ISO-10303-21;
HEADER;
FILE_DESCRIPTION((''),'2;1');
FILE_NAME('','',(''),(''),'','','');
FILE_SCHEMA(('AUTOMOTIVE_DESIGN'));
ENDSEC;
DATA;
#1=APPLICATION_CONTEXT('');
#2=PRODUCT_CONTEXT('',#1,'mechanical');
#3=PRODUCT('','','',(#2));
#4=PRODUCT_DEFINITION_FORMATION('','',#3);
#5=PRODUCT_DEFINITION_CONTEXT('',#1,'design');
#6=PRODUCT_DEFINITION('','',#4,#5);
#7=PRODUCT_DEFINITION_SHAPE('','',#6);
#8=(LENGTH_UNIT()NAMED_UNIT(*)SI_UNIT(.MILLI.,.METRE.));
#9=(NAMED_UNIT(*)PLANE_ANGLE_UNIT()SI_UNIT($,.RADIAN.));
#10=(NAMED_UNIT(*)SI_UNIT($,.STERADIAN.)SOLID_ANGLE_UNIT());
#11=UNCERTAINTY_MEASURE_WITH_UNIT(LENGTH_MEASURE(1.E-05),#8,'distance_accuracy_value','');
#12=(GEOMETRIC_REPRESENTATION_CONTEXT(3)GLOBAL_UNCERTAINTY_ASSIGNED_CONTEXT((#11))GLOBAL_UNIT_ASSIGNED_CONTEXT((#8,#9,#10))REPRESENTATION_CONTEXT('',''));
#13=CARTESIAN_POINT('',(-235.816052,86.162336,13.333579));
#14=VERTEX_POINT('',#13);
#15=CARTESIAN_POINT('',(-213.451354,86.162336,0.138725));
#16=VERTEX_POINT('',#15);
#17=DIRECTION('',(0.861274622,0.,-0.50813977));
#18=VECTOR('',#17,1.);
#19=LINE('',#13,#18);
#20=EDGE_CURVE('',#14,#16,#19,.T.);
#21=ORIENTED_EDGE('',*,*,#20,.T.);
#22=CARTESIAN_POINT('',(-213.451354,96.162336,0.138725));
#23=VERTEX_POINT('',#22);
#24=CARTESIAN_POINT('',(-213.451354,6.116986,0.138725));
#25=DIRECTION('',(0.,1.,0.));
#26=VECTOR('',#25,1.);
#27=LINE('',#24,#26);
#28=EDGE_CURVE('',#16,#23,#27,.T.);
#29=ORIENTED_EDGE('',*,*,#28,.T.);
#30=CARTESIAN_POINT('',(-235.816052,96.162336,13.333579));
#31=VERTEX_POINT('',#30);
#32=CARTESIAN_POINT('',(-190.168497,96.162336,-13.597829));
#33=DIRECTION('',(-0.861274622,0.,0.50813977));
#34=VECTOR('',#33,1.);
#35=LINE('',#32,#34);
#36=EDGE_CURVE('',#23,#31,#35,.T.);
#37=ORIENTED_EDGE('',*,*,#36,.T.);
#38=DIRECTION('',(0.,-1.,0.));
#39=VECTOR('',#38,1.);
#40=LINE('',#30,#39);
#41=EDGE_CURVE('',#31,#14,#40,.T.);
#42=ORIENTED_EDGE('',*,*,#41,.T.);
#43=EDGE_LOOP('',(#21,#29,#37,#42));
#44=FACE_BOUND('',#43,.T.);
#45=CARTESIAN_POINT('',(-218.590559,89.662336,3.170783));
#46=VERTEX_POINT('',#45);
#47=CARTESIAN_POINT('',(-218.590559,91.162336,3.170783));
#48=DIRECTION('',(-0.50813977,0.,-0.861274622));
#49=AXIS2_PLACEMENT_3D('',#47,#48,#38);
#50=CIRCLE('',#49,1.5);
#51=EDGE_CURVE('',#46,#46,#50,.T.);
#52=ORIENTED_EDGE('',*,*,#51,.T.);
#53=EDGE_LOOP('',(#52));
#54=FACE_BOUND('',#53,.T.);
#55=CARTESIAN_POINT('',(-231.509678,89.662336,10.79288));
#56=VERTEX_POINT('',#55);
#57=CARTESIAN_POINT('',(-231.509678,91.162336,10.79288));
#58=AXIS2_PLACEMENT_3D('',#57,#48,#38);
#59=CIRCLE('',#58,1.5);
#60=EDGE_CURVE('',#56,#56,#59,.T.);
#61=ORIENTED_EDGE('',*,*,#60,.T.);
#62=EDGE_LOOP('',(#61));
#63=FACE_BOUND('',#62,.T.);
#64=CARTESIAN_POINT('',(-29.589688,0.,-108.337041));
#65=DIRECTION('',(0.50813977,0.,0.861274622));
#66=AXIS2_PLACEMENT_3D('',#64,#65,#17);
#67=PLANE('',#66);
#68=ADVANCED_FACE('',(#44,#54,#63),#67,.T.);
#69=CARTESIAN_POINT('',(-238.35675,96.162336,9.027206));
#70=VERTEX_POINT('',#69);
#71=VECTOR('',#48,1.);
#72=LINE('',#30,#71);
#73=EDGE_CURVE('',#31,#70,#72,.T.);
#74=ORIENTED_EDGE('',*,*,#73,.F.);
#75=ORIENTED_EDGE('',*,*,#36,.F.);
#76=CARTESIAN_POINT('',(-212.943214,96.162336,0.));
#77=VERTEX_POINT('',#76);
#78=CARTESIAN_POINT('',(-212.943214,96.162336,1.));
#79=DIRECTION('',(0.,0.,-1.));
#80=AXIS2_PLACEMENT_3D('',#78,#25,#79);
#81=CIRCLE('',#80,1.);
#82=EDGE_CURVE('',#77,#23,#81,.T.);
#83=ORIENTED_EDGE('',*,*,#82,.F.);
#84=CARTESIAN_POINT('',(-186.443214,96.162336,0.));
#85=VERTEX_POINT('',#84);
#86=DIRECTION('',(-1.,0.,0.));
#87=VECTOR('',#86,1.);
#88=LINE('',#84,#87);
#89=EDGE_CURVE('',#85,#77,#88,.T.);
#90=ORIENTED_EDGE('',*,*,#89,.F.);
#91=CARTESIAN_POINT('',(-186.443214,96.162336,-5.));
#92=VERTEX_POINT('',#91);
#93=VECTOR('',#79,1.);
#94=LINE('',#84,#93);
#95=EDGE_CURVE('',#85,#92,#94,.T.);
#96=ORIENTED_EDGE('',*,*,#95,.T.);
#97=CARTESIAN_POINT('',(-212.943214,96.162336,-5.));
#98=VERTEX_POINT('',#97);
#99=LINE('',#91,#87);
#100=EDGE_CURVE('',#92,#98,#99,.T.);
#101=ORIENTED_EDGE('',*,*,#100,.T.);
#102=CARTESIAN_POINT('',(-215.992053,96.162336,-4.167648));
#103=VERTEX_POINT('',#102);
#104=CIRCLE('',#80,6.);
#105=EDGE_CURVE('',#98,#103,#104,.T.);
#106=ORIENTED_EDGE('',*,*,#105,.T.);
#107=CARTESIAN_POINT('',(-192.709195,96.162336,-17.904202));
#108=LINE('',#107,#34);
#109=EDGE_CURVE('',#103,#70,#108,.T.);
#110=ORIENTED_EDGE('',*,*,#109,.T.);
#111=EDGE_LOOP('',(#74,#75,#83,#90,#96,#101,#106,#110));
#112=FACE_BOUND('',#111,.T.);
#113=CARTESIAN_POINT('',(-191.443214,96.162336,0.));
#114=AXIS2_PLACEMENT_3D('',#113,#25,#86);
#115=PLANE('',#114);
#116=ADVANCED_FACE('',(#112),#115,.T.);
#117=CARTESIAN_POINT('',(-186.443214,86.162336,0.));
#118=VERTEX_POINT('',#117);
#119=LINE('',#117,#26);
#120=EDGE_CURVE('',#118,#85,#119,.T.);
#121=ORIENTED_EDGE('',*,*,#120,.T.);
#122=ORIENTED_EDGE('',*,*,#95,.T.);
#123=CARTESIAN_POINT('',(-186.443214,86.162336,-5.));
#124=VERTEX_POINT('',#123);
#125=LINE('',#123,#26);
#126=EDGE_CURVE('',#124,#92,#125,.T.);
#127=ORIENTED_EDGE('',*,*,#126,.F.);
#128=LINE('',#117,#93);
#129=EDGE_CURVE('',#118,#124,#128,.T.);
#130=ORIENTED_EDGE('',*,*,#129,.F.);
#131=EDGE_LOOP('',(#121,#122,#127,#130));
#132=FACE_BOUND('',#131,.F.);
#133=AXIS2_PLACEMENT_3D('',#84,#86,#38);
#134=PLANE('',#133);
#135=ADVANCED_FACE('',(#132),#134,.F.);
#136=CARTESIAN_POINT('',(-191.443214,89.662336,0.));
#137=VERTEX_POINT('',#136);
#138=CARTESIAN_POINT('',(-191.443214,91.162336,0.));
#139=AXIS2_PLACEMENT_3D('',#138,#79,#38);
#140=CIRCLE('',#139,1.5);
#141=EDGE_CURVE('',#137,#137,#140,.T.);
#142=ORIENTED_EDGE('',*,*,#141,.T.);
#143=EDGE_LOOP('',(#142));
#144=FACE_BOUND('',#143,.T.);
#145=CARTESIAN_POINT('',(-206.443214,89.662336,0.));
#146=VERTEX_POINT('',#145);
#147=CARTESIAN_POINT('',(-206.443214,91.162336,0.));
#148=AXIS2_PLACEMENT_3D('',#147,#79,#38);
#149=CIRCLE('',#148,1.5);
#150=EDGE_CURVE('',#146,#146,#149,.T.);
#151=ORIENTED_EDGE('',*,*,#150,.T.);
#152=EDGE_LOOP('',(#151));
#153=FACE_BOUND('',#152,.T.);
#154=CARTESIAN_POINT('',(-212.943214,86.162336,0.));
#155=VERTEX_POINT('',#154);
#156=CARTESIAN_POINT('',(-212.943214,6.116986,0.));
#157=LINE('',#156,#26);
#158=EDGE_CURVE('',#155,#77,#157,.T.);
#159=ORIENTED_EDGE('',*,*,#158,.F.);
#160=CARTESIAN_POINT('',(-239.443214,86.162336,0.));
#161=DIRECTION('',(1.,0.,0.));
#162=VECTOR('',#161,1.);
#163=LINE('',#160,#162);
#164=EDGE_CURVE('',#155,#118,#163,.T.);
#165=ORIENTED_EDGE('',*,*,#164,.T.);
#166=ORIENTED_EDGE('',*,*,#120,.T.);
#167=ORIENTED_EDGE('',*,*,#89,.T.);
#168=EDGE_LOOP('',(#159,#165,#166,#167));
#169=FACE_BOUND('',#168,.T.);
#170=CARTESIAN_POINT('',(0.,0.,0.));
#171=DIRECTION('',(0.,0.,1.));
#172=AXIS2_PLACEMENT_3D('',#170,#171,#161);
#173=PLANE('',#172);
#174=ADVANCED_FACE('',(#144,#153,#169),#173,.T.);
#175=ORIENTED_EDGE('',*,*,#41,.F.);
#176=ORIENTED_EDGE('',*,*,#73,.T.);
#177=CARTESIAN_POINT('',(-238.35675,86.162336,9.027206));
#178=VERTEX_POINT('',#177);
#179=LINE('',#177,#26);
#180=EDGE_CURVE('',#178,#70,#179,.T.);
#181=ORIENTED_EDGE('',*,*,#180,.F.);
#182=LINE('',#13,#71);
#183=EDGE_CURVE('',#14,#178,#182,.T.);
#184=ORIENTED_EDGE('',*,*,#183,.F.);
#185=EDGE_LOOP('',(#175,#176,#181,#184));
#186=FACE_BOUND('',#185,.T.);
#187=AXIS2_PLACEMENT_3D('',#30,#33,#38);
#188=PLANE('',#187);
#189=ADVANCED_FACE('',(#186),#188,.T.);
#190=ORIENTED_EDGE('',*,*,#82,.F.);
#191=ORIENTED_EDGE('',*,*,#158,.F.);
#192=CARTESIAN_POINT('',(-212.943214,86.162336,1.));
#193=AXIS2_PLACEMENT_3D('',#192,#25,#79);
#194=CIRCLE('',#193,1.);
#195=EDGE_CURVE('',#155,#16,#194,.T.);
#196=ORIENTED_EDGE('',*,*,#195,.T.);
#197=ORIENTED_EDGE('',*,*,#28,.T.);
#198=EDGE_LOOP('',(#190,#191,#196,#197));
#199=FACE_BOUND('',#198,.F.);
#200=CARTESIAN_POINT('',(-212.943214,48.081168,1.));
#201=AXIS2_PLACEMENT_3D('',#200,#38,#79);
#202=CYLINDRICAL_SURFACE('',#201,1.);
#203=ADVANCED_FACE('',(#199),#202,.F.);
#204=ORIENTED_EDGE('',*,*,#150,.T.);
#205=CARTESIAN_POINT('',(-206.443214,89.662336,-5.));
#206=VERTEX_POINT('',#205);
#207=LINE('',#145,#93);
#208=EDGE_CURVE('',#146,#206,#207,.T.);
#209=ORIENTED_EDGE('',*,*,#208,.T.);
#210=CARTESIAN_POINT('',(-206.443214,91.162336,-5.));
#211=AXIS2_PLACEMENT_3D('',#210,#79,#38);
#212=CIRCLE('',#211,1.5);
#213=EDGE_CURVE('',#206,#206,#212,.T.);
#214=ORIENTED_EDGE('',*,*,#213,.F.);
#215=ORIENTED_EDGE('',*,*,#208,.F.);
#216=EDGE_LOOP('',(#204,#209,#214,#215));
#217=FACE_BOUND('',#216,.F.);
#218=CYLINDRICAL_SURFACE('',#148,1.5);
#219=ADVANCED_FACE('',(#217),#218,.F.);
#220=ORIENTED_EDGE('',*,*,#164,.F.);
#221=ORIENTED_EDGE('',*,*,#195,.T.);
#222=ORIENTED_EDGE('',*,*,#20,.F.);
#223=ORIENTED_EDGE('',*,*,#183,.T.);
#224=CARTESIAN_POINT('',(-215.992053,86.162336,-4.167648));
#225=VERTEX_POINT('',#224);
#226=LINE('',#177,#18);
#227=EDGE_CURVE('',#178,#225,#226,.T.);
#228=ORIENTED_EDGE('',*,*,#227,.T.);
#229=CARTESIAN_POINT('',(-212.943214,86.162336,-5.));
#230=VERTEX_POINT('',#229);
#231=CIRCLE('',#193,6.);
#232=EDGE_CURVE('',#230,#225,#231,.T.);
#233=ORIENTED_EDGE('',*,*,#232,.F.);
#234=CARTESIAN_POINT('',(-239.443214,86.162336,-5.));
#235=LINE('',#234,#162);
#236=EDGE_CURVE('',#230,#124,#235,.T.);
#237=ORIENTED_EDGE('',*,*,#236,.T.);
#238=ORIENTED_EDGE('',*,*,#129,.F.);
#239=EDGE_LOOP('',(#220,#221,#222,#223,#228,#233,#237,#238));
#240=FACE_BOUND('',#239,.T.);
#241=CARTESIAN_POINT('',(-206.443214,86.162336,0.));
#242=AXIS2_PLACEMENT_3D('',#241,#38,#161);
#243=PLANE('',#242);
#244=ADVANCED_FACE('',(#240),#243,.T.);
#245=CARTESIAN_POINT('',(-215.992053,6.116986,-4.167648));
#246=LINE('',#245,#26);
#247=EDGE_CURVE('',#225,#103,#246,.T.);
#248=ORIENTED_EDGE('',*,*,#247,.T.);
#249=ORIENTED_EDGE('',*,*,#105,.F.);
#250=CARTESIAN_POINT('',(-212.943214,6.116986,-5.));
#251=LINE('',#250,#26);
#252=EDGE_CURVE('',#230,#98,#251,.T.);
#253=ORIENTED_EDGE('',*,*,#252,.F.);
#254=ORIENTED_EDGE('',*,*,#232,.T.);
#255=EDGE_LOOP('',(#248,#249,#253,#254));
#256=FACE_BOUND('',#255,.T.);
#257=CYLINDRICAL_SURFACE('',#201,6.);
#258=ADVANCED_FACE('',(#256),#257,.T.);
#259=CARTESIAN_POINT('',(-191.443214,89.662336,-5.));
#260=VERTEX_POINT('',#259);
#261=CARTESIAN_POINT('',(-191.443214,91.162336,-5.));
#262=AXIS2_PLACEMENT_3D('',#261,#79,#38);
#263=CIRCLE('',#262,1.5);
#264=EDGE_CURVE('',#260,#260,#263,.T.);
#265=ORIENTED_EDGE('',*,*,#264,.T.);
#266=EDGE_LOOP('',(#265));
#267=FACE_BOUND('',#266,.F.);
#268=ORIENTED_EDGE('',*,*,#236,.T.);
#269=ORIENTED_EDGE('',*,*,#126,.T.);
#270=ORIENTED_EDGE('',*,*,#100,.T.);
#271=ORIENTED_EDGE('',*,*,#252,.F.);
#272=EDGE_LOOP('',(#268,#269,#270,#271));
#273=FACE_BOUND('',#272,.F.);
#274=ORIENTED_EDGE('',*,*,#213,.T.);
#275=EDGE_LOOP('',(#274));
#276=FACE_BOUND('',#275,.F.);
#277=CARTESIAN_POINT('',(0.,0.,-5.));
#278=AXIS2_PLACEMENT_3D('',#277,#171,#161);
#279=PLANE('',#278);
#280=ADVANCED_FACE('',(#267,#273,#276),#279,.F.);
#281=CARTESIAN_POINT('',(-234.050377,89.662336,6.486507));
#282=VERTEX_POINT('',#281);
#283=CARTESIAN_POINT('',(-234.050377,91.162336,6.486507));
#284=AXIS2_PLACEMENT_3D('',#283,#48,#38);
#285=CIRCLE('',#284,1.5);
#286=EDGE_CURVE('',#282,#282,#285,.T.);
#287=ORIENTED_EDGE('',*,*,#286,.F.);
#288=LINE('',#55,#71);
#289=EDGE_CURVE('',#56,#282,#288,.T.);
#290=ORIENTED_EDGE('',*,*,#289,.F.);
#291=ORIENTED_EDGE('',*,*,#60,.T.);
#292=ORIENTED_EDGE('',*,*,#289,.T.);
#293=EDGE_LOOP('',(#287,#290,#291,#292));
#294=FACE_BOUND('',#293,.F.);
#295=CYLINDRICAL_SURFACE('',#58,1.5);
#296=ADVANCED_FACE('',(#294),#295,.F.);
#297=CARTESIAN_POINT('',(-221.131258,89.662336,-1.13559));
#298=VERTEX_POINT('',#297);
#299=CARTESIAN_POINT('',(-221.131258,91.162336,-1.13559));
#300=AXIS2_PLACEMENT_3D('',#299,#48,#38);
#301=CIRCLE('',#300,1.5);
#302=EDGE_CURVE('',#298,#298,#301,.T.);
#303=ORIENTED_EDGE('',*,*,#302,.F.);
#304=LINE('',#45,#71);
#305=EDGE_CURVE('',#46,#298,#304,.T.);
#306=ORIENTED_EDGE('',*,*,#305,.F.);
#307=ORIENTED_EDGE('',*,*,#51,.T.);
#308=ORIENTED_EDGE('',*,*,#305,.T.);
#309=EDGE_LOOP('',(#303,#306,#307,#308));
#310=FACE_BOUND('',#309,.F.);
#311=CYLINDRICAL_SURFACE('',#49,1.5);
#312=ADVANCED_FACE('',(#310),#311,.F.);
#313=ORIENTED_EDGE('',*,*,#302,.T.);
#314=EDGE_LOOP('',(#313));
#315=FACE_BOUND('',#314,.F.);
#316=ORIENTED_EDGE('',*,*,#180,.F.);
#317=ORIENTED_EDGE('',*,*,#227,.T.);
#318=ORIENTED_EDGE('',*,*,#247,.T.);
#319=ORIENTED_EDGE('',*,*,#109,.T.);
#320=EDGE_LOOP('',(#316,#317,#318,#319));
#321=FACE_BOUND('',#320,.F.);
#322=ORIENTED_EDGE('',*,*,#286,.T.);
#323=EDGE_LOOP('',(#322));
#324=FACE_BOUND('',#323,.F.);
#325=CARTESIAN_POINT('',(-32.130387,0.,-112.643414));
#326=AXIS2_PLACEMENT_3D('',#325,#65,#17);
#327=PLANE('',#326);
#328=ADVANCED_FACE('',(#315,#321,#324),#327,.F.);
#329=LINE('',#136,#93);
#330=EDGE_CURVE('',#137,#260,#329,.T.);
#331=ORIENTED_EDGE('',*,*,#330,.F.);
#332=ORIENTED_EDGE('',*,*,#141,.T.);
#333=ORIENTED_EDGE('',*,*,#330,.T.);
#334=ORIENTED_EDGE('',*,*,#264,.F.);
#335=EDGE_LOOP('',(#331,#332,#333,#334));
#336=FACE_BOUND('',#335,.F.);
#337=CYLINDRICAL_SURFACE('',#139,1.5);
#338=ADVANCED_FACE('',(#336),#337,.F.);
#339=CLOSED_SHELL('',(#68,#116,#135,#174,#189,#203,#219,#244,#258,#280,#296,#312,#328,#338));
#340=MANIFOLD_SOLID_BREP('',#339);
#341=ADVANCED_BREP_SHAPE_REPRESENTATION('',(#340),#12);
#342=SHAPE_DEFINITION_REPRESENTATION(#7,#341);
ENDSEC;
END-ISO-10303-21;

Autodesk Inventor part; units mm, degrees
ref_plane "YZ Plane" through (0, 0, 0) normal (1, 0, 0) x (0, 1, 0)
ref_plane "XZ Plane" through (0, 0, 0) normal (0, 1, 0) x (-1, 0, 0)
ref_plane "XY Plane" through (0, 0, 0) normal (0, 0, 1) x (1, 0, 0)
sketch "スケッチ1" plane through (0, 0, 0) normal (0, 0, 1) x (1, 0, 0)
  circle A0 centre (-137.47813, 108.715013) radius 1.5
  circle A1 centre (-137.47813, 108.715013) radius 4
  circle A2 centre (-84.833891, 108.084965) radius 1.5
  circle A3 centre (-84.833891, 108.084965) radius 4
  arc A4 (-118.947299, 71.123436) -> (-117.73095, 71.382243) centre (-118.502117, 72.018876) ccw
  arc A5 (-114.600271, 73.907195) -> (-117.73095, 71.382243) centre (-110, 65) ccw
  arc A6 (-114.600271, 73.907195) -> (-114.089743, 75.041147) centre (-115.059151, 74.795694) ccw
  line L0 (-114.089743, 75.041147) -> (-119.33341, 95.750821)
  arc A7 (-119.33341, 95.750821) -> (-120.080809, 96.480412) centre (-120.302818, 95.505368) ccw
  arc A8 (-121.730917, 97.23053) -> (-120.080809, 96.480412) centre (-119.081767, 100.868113) ccw
  arc A9 (-121.730917, 97.23053) -> (-122.772044, 97.31398) centre (-122.319616, 96.422178) ccw
  line L1 (-122.772044, 97.31398) -> (-145.176978, 85.94755)
  arc A10 (-145.176978, 85.94755) -> (-145.169733, 84.160308) centre (-144.724551, 85.055748) ccw
  line L2 (-145.169733, 84.160308) -> (-118.947299, 71.123436)
  arc A11 (-111.181518, 75.777506) -> (-110.19287, 75.023145) centre (-110.212109, 76.022959) ccw
  arc A12 (-100.681376, 68.696468) -> (-110.19287, 75.023145) centre (-110, 65) ccw
  arc A13 (-100.681376, 68.696468) -> (-99.603497, 68.076257) centre (-99.751838, 69.065193) ccw
  line L3 (-99.603497, 68.076257) -> (-77.042446, 71.460414)
  arc A14 (-77.042446, 71.460414) -> (-76.670938, 73.303609) centre (-77.190786, 72.449351) ccw
  line L4 (-76.670938, 73.303609) -> (-114.637331, 96.407596)
  arc A15 (-114.637331, 96.407596) -> (-116.126588, 95.307885) centre (-115.15718, 95.553338) ccw
  line L5 (-116.126588, 95.307885) -> (-111.181518, 75.777506)
  circle A16 centre (-150.294817, 85.033166) radius 1.5
  arc A17 (-124.129325, 99.989384) -> (-123.581755, 100.878808) centre (-124.581752, 100.881185) ccw
  arc A18 (-114.594354, 100.531773) -> (-123.581755, 100.878808) centre (-119.081767, 100.868113) ccw
  arc A19 (-114.594354, 100.531773) -> (-114.117, 99.602773) centre (-113.597151, 100.457031) ccw
  line L6 (-114.117, 99.602773) -> (-73.405222, 74.828115)
  arc A20 (-73.405222, 74.828115) -> (-72.36076, 74.831033) centre (-72.885373, 75.682374) ccw
  arc A21 (-73.660486, 68.382589) -> (-72.36076, 74.831033) centre (-70, 71) ccw
  arc A22 (-73.660486, 68.382589) -> (-74.622268, 68.789879) centre (-74.473928, 67.800942) ccw
  line L7 (-74.622268, 68.789879) -> (-99.158476, 65.109447)
  arc A23 (-99.158476, 65.109447) -> (-100.006948, 64.200283) centre (-99.010135, 64.120511) ccw
  arc A24 (-119.754961, 67.311137) -> (-100.006948, 64.200283) centre (-110, 65) ccw
  arc A25 (-119.754961, 67.311137) -> (-120.282843, 68.437115) centre (-120.728025, 67.541674) ccw
  line L8 (-120.282843, 68.437115) -> (-147.085218, 81.762313)
  arc A26 (-147.085218, 81.762313) -> (-148.083283, 81.700131) centre (-147.5304, 80.866873) ccw
  arc A27 (-148.11038, 88.384022) -> (-148.083283, 81.700131) centre (-150.294817, 85.033166) ccw
  arc A28 (-148.11038, 88.384022) -> (-147.111844, 88.329935) centre (-147.564271, 89.221736) ccw
  line L9 (-147.111844, 88.329935) -> (-124.129325, 99.989384)
  circle A29 centre (-110, 65) radius 7.025
  circle A30 centre (-119.081767, 100.868113) radius 1.5
  circle A31 centre (-70, 71) radius 1.5
  line L10 (-330.399972, 95) -> (-110, 65)
  circle A32 centre (-156.443214, 91.162336) radius 4
  circle A33 centre (-136.470623, 92.209055) radius 4
  line L11 (0, 0) -> (-155.794817, 0)
  line L12 (-329.051247, 104.90863) -> (-108.651275, 74.90863)
  circle A34 centre (-156.443214, 91.162336) radius 9
  circle A35 centre (-136.470623, 92.209055) radius 6
  line L13 (-156.443214, 91.162336) -> (-136.470623, 92.209055)
  circle A36 centre (-110, 65) radius 65
  circle A37 centre (-191.443214, 91.162336) radius 5
  line L14 (-191.443214, 91.162336) -> (-156.443214, 91.162336)
  line L15 (-191.443214, 91.162336) -> (-206.443214, 91.162336)
  circle A38 centre (-206.443214, 91.162336) radius 5
  line L16 (-206.443214, 91.162336) -> (-221.443214, 91.162336)
  circle A39 centre (-221.443214, 91.162336) radius 5
  line L17 (-221.443214, 91.162336) -> (-236.443214, 91.162336)
  circle A40 centre (-236.443214, 91.162336) radius 5
  line L18 (-206.843214, 96.14631) -> (-157.163214, 100.133489)
  line L19 (-206.843214, 86.178361) -> (-157.163214, 82.191182)
  line L20 (-135.882319, 98.180143) -> (-155.560758, 100.118968)
  line L21 (-154.629369, 82.34701) -> (-135.261393, 86.332171)
  circle A41 centre (-206.443214, 91.162336) radius 1.5
  circle A42 centre (-191.443214, 91.162336) radius 1.5
  line L22 (-236.443214, 91.162336) -> (-191.443214, 91.162336) construction
  line L23 (-236.443214, 86.162336) -> (-191.443214, 86.162336)
  line L24 (-191.443214, 96.162336) -> (-236.443214, 96.162336)
  arc A43 (-236.443214, 96.162336) -> (-236.443214, 86.162336) centre (-236.443214, 91.162336) ccw
  arc A44 (-191.443214, 86.162336) -> (-191.443214, 96.162336) centre (-191.443214, 91.162336) ccw
  point P0 (-202.811763, 87.725395)
  point P1 (-169.324077, 83.167179)
  point P2 (-153.510113, 82.653698)
  point P3 (-153.460125, 82.587594)
  point P4 (-191.336809, 86.163468)
  point P5 (-192.881846, 86.373772)
  point P6 (-213.943214, 91.162336)
  dimension "d0" = 8
  dimension "d1" = 8
  dimension "d2" = 95
  dimension "d3" = 7.75125
  dimension "d4" = 10
  dimension "d5" = 18
  dimension "d6" = 12
  dimension "d7" = 20
  dimension "d8" = 3
  dimension "d9" = 130
  dimension "d10" = 10
  dimension "d11" = 35
  dimension "d12" = 15
  dimension "d13" = 10
  dimension "d14" = 15
  dimension "d15" = 10
  dimension "d16" = 15
  dimension "d17" = 10
  dimension "d18" = 3
  dimension "d19" = 3
  dimension "d20" = 10
extrude "押し出し1" add sketch "スケッチ1" against normal blind 5 contours A37 L12 | L12 A37 L15 A42 L14 | L23 A39 L12 A38 L19 | L19 A38 L23 | A37 L23 A38 L12 | L12 A38 L15 A37 | L14 A42 L15 A37 | A38 L12 | L23 A40 L17 L12 A39 | A39 L12 | L12 A38 L16 A41 L15 | L15 A38 L24 A37 | A42 L15 L14 | L14 L15 A42 | L24 A38 L18 | L18 A38 L16 A39 L24 | L12 A39 L16 A38 | A39 L17 L16 L12 | L12 L17 A39 | L15 A41 L16 A38 | A39 L16 L17 | A39 L17 L12 A40 L24 | L17 A40 L12 | A41 L16 L15 | L15 L16 A41
hole "穴1" at (-206.443214, 91.162336, 0) at (-191.443214, 91.162336, 0) direction (0, 0, -1) diameter 3 depth 12 tip angle 118
sketch "スケッチ2" plane through (0, 0, 0) normal (0, 0, 1) x (1, 0, 0)
  circle A0 centre (-206.443214, 91.162336) radius 1.5
  circle A1 centre (-191.443214, 91.162336) radius 1.5
  line L0 (-236.443214, 96.162336) -> (-191.443214, 96.162336)
  arc A2 (-191.443214, 86.162336) -> (-191.443214, 96.162336) centre (-191.443214, 91.162336) ccw
  line L1 (-191.443214, 86.162336) -> (-236.443214, 86.162336)
  arc A3 (-236.443214, 96.162336) -> (-236.443214, 86.162336) centre (-236.443214, 91.162336) ccw
  line L2 (-236.443214, 96.162336) -> (-239.443214, 96.162336)
  line L3 (-239.443214, 96.162336) -> (-239.443214, 86.162336)
  line L4 (-191.443214, 86.162336) -> (-236.443214, 86.162336)
  line L5 (-239.443214, 86.162336) -> (-236.443214, 86.162336)
  arc A4 (-191.443214, 86.162336) -> (-191.443214, 96.162336) centre (-191.443214, 91.162336) ccw
  line L6 (-191.443214, 96.162336) -> (-186.443214, 96.162336)
  line L7 (-186.443214, 96.162336) -> (-186.443214, 86.162336)
  line L8 (-186.443214, 86.162336) -> (-191.443214, 86.162336)
  line L9 (-191.443214, 96.162336) -> (-236.443214, 96.162336)
  line L10 (-236.443214, 86.162336) -> (-191.443214, 86.162336)
  arc A5 (-236.443214, 96.162336) -> (-236.443214, 86.162336) centre (-236.443214, 91.162336) ccw
  circle A6 centre (-234.443214, 91.162336) radius 5
  circle A7 centre (-219.443214, 91.162336) radius 5
  circle A8 centre (-206.443214, 91.162336) radius 1.5
  circle A9 centre (-206.443214, 91.162336) radius 5
  point P0 (0, 0)
  point P1 (-239.443214, 87.162336)
  point P2 (-186.443214, 91.162336)
  point P3 (-239.443214, 87.162336)
  point P4 (-239.443214, 95.162336)
  point P5 (-234.443214, 86.162336)
  point P6 (-234.443214, 96.162336)
  point P7 (-239.443214, 95.162336)
  dimension "d32" = 53
  dimension "d33" = 10
  dimension "d34" = 10
  dimension "d35" = 15
  dimension "d36" = 15
  dimension "d46" = 10
extrude "押し出し2" add sketch "スケッチ2" against normal blind 5 contours L0 A6 L3 A3 | A3 L3 L2 | A6 | A6 L1 A3 L3 | A3 L5 L3 | L6 L7 A2 | L7 L8 A2
hole "穴2" at (-234.443214, 91.162336, 0) at (-219.443214, 91.162336, 0) direction (0, 0, -1) diameter 3 depth 12 tip angle 118
sketch "スケッチ3" plane through (0, 0, 0) normal (0, 0, 1) x (1, 0, 0)
  circle A0 centre (-219.443214, 91.162336) radius 1.5
  line L0 (-186.443214, 96.162336) -> (-186.443214, 86.162336)
  line L1 (-186.443214, 86.162336) -> (-239.443214, 86.162336)
  line L2 (-239.443214, 86.162336) -> (-239.443214, 96.162336)
  line L3 (-239.443214, 96.162336) -> (-186.443214, 96.162336)
  circle A1 centre (-206.443214, 91.162336) radius 1.5
  circle A2 centre (-191.443214, 91.162336) radius 1.5
  line L4 (-186.443214, 96.162336) -> (-239.443214, 96.162336)
  line L5 (-212.943214, 96.162336) -> (-212.943214, 86.162336)
  line L6 (-239.443214, 86.162336) -> (-186.443214, 86.162336)
  circle A3 centre (-234.443214, 91.162336) radius 1.5
  point P0 (0, 0)
bend part "曲げパーツ1" radius 1 angle 30.54 line through (-212.943214, 96.162336, 0) along (0, -1, 0) centre toward (0, 0, 1) moving side (-1, 0, 0) both sides no
equation "\"d36\" = d35"
properties part number "カウンター 取り付け根元曲げパーツ" material "アルミニウム 6061"
